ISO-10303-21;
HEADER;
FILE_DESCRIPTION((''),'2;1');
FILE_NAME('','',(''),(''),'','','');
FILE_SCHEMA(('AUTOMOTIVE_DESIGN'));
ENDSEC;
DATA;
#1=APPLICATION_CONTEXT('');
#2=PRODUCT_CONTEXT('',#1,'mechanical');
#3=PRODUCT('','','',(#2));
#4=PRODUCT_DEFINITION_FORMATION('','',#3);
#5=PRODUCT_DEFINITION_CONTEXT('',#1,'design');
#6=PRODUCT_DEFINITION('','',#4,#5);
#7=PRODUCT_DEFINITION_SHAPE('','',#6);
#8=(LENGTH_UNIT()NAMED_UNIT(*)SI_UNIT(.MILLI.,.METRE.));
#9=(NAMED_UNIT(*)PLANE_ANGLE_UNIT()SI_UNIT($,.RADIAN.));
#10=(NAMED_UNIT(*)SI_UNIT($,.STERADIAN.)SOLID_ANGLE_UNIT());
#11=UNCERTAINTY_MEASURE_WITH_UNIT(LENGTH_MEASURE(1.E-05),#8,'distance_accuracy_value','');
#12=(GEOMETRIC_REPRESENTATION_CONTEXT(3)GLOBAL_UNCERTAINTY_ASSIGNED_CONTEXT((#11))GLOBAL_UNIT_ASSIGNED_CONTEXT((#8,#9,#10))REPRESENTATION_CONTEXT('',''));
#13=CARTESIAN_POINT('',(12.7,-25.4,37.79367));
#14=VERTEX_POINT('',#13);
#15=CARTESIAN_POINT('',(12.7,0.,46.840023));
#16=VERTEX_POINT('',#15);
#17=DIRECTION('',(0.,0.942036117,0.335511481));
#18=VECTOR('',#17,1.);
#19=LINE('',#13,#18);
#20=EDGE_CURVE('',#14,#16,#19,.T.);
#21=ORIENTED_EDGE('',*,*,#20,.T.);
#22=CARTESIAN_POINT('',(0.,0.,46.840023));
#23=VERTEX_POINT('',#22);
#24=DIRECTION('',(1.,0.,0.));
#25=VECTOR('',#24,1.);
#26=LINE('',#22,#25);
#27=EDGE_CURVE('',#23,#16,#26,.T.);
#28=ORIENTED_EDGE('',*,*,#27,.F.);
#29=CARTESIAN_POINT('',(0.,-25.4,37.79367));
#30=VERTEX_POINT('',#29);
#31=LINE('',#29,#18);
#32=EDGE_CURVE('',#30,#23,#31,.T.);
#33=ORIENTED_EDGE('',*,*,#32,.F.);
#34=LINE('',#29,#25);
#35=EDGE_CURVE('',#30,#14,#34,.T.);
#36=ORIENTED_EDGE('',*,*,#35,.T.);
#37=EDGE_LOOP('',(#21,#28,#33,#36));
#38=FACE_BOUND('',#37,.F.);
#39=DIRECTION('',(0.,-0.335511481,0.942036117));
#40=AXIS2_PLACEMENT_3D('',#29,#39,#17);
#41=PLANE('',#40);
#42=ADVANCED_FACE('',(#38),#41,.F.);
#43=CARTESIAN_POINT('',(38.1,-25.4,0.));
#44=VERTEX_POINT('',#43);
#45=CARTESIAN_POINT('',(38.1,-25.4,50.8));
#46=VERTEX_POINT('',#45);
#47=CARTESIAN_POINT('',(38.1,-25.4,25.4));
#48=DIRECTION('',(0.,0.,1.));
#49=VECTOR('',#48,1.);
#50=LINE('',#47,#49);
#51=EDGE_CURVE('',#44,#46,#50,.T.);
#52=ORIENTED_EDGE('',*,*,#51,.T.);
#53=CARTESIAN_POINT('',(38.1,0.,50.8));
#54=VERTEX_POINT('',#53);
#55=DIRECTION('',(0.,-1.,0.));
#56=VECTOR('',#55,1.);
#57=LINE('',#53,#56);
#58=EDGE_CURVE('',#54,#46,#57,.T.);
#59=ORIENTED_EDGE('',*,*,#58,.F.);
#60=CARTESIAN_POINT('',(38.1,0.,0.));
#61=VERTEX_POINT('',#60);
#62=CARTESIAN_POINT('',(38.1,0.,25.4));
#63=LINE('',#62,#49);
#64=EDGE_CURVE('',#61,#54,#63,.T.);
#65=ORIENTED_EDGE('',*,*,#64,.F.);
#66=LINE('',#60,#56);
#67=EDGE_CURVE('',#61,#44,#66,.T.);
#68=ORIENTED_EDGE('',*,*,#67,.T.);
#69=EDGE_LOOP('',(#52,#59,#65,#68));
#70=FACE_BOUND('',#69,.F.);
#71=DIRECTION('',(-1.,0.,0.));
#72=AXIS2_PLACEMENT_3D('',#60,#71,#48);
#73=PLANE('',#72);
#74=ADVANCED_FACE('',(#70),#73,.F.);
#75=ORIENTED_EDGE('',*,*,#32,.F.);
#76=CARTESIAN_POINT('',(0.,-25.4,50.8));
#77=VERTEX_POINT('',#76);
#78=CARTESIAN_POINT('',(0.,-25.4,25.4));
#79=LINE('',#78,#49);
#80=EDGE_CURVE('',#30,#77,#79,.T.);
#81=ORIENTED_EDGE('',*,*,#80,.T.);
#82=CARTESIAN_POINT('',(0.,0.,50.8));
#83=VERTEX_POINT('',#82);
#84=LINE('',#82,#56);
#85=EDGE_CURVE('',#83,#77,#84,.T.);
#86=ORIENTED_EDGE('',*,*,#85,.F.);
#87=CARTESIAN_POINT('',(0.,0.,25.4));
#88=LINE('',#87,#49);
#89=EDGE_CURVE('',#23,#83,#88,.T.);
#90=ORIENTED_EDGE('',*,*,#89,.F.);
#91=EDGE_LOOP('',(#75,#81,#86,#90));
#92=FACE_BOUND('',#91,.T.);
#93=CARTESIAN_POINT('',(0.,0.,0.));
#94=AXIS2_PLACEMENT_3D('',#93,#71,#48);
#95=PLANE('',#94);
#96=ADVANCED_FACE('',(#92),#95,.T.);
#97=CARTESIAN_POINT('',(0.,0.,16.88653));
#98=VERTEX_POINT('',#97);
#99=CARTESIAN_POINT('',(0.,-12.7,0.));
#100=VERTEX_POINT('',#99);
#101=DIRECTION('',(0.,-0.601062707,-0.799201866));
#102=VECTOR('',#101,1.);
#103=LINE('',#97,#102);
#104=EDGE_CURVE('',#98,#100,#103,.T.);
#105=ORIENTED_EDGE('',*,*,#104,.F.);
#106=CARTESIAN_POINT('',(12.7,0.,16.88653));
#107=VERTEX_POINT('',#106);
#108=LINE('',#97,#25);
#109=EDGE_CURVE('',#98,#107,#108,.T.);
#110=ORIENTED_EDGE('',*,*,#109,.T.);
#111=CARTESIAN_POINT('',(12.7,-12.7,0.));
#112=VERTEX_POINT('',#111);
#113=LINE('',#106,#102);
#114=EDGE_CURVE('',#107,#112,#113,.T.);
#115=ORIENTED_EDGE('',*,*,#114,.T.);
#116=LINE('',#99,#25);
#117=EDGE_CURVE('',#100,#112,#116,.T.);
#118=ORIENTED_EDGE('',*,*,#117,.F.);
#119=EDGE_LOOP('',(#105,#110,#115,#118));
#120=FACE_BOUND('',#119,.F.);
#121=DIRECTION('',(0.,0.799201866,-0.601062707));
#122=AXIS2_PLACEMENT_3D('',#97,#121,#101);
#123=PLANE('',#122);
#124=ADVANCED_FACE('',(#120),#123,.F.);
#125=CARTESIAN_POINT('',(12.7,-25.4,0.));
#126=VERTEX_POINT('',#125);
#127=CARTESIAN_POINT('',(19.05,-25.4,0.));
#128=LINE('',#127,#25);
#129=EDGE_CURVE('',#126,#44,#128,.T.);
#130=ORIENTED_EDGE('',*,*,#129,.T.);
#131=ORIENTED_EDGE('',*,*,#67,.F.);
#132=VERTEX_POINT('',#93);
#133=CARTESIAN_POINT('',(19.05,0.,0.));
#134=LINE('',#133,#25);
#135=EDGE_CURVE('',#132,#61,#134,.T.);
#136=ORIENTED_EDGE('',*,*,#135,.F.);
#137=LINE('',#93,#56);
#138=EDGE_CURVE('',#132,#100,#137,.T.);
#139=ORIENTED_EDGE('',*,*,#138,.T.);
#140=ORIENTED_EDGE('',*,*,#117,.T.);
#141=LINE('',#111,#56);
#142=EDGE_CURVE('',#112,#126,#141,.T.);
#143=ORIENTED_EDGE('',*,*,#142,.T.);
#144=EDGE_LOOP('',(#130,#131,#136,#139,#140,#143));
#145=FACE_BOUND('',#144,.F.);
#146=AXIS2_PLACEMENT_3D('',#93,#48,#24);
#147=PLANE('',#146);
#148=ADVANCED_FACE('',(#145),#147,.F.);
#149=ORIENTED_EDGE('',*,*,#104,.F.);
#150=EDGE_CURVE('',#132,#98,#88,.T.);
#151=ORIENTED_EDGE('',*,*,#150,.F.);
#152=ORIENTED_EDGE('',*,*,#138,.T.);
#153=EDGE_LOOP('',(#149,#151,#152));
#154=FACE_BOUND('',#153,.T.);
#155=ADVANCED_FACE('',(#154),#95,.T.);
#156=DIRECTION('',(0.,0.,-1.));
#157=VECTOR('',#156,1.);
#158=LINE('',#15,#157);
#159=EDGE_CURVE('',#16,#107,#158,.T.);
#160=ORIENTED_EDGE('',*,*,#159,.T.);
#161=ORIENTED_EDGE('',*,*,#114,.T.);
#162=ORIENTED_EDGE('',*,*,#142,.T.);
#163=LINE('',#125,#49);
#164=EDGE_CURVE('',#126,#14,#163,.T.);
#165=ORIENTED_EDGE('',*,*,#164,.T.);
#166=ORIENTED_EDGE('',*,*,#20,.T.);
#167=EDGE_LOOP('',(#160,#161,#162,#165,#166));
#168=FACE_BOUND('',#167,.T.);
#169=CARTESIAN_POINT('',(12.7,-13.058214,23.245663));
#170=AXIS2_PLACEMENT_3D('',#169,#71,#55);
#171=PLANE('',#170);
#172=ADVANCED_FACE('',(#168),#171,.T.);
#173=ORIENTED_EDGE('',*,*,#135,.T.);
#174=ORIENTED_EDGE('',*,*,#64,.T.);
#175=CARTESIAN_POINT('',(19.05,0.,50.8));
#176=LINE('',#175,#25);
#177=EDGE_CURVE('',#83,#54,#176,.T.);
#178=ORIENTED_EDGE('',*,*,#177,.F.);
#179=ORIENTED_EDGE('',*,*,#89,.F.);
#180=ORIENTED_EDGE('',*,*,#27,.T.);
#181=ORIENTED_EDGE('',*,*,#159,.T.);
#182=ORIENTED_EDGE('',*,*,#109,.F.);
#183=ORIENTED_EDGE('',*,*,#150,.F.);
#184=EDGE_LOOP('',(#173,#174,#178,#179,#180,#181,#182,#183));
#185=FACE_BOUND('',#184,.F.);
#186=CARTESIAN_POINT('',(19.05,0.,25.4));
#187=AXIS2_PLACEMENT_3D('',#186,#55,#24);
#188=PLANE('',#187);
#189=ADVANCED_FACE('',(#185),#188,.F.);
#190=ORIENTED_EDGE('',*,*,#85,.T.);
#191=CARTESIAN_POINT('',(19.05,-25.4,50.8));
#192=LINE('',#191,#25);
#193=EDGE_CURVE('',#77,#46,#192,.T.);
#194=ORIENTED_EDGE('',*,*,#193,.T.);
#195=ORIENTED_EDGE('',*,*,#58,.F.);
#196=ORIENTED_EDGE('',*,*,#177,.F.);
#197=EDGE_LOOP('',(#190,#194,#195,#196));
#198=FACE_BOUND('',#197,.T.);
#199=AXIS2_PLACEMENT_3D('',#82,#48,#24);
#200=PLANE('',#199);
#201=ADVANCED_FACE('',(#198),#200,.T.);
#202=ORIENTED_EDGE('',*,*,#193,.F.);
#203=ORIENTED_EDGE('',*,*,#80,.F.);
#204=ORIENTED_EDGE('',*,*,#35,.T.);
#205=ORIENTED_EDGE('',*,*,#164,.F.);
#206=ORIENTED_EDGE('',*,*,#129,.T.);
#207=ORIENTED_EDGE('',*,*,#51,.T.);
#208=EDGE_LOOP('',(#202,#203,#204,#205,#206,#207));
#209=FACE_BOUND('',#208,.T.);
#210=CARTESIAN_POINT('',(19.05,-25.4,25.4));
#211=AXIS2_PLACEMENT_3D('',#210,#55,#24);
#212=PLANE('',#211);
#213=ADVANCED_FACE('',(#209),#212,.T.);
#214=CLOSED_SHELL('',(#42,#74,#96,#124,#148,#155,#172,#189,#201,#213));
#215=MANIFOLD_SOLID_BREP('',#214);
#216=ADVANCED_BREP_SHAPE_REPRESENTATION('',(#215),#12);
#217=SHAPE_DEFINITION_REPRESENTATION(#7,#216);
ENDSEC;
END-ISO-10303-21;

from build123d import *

# Parameters (mm, degrees)
F0_W     = 38.1
F0_H     = 50.8
F1_DEPTH = 25.4
F3_DEPTH = 12.7


# Not quite as in the source:
# - a length typed as a fraction of an inch, garbled in the dataset ("3 / 203.2 mm" for 3/8 in), is restored


with BuildPart() as f1:
    # F0 (on Front) → F1 (new body)
    with BuildSketch(Plane.XZ):
        with Locations((19.05, 25.4)):
            Rectangle(F0_W, F0_H)
    extrude(amount=F1_DEPTH)

    # F2 (on face) → F3 (cut)
    with BuildSketch(Plane(origin=(0, 0, 0), x_dir=(0, -1, 0), z_dir=(-1, 0, 0))):
        Polygon((25.4, 0), (25.4, 37.7936698496), (0, 46.8400232494), (0, 16.886530444), (12.7, 0), align=None)
    extrude(amount=-F3_DEPTH, mode=Mode.SUBTRACT)


solid = f1.part
